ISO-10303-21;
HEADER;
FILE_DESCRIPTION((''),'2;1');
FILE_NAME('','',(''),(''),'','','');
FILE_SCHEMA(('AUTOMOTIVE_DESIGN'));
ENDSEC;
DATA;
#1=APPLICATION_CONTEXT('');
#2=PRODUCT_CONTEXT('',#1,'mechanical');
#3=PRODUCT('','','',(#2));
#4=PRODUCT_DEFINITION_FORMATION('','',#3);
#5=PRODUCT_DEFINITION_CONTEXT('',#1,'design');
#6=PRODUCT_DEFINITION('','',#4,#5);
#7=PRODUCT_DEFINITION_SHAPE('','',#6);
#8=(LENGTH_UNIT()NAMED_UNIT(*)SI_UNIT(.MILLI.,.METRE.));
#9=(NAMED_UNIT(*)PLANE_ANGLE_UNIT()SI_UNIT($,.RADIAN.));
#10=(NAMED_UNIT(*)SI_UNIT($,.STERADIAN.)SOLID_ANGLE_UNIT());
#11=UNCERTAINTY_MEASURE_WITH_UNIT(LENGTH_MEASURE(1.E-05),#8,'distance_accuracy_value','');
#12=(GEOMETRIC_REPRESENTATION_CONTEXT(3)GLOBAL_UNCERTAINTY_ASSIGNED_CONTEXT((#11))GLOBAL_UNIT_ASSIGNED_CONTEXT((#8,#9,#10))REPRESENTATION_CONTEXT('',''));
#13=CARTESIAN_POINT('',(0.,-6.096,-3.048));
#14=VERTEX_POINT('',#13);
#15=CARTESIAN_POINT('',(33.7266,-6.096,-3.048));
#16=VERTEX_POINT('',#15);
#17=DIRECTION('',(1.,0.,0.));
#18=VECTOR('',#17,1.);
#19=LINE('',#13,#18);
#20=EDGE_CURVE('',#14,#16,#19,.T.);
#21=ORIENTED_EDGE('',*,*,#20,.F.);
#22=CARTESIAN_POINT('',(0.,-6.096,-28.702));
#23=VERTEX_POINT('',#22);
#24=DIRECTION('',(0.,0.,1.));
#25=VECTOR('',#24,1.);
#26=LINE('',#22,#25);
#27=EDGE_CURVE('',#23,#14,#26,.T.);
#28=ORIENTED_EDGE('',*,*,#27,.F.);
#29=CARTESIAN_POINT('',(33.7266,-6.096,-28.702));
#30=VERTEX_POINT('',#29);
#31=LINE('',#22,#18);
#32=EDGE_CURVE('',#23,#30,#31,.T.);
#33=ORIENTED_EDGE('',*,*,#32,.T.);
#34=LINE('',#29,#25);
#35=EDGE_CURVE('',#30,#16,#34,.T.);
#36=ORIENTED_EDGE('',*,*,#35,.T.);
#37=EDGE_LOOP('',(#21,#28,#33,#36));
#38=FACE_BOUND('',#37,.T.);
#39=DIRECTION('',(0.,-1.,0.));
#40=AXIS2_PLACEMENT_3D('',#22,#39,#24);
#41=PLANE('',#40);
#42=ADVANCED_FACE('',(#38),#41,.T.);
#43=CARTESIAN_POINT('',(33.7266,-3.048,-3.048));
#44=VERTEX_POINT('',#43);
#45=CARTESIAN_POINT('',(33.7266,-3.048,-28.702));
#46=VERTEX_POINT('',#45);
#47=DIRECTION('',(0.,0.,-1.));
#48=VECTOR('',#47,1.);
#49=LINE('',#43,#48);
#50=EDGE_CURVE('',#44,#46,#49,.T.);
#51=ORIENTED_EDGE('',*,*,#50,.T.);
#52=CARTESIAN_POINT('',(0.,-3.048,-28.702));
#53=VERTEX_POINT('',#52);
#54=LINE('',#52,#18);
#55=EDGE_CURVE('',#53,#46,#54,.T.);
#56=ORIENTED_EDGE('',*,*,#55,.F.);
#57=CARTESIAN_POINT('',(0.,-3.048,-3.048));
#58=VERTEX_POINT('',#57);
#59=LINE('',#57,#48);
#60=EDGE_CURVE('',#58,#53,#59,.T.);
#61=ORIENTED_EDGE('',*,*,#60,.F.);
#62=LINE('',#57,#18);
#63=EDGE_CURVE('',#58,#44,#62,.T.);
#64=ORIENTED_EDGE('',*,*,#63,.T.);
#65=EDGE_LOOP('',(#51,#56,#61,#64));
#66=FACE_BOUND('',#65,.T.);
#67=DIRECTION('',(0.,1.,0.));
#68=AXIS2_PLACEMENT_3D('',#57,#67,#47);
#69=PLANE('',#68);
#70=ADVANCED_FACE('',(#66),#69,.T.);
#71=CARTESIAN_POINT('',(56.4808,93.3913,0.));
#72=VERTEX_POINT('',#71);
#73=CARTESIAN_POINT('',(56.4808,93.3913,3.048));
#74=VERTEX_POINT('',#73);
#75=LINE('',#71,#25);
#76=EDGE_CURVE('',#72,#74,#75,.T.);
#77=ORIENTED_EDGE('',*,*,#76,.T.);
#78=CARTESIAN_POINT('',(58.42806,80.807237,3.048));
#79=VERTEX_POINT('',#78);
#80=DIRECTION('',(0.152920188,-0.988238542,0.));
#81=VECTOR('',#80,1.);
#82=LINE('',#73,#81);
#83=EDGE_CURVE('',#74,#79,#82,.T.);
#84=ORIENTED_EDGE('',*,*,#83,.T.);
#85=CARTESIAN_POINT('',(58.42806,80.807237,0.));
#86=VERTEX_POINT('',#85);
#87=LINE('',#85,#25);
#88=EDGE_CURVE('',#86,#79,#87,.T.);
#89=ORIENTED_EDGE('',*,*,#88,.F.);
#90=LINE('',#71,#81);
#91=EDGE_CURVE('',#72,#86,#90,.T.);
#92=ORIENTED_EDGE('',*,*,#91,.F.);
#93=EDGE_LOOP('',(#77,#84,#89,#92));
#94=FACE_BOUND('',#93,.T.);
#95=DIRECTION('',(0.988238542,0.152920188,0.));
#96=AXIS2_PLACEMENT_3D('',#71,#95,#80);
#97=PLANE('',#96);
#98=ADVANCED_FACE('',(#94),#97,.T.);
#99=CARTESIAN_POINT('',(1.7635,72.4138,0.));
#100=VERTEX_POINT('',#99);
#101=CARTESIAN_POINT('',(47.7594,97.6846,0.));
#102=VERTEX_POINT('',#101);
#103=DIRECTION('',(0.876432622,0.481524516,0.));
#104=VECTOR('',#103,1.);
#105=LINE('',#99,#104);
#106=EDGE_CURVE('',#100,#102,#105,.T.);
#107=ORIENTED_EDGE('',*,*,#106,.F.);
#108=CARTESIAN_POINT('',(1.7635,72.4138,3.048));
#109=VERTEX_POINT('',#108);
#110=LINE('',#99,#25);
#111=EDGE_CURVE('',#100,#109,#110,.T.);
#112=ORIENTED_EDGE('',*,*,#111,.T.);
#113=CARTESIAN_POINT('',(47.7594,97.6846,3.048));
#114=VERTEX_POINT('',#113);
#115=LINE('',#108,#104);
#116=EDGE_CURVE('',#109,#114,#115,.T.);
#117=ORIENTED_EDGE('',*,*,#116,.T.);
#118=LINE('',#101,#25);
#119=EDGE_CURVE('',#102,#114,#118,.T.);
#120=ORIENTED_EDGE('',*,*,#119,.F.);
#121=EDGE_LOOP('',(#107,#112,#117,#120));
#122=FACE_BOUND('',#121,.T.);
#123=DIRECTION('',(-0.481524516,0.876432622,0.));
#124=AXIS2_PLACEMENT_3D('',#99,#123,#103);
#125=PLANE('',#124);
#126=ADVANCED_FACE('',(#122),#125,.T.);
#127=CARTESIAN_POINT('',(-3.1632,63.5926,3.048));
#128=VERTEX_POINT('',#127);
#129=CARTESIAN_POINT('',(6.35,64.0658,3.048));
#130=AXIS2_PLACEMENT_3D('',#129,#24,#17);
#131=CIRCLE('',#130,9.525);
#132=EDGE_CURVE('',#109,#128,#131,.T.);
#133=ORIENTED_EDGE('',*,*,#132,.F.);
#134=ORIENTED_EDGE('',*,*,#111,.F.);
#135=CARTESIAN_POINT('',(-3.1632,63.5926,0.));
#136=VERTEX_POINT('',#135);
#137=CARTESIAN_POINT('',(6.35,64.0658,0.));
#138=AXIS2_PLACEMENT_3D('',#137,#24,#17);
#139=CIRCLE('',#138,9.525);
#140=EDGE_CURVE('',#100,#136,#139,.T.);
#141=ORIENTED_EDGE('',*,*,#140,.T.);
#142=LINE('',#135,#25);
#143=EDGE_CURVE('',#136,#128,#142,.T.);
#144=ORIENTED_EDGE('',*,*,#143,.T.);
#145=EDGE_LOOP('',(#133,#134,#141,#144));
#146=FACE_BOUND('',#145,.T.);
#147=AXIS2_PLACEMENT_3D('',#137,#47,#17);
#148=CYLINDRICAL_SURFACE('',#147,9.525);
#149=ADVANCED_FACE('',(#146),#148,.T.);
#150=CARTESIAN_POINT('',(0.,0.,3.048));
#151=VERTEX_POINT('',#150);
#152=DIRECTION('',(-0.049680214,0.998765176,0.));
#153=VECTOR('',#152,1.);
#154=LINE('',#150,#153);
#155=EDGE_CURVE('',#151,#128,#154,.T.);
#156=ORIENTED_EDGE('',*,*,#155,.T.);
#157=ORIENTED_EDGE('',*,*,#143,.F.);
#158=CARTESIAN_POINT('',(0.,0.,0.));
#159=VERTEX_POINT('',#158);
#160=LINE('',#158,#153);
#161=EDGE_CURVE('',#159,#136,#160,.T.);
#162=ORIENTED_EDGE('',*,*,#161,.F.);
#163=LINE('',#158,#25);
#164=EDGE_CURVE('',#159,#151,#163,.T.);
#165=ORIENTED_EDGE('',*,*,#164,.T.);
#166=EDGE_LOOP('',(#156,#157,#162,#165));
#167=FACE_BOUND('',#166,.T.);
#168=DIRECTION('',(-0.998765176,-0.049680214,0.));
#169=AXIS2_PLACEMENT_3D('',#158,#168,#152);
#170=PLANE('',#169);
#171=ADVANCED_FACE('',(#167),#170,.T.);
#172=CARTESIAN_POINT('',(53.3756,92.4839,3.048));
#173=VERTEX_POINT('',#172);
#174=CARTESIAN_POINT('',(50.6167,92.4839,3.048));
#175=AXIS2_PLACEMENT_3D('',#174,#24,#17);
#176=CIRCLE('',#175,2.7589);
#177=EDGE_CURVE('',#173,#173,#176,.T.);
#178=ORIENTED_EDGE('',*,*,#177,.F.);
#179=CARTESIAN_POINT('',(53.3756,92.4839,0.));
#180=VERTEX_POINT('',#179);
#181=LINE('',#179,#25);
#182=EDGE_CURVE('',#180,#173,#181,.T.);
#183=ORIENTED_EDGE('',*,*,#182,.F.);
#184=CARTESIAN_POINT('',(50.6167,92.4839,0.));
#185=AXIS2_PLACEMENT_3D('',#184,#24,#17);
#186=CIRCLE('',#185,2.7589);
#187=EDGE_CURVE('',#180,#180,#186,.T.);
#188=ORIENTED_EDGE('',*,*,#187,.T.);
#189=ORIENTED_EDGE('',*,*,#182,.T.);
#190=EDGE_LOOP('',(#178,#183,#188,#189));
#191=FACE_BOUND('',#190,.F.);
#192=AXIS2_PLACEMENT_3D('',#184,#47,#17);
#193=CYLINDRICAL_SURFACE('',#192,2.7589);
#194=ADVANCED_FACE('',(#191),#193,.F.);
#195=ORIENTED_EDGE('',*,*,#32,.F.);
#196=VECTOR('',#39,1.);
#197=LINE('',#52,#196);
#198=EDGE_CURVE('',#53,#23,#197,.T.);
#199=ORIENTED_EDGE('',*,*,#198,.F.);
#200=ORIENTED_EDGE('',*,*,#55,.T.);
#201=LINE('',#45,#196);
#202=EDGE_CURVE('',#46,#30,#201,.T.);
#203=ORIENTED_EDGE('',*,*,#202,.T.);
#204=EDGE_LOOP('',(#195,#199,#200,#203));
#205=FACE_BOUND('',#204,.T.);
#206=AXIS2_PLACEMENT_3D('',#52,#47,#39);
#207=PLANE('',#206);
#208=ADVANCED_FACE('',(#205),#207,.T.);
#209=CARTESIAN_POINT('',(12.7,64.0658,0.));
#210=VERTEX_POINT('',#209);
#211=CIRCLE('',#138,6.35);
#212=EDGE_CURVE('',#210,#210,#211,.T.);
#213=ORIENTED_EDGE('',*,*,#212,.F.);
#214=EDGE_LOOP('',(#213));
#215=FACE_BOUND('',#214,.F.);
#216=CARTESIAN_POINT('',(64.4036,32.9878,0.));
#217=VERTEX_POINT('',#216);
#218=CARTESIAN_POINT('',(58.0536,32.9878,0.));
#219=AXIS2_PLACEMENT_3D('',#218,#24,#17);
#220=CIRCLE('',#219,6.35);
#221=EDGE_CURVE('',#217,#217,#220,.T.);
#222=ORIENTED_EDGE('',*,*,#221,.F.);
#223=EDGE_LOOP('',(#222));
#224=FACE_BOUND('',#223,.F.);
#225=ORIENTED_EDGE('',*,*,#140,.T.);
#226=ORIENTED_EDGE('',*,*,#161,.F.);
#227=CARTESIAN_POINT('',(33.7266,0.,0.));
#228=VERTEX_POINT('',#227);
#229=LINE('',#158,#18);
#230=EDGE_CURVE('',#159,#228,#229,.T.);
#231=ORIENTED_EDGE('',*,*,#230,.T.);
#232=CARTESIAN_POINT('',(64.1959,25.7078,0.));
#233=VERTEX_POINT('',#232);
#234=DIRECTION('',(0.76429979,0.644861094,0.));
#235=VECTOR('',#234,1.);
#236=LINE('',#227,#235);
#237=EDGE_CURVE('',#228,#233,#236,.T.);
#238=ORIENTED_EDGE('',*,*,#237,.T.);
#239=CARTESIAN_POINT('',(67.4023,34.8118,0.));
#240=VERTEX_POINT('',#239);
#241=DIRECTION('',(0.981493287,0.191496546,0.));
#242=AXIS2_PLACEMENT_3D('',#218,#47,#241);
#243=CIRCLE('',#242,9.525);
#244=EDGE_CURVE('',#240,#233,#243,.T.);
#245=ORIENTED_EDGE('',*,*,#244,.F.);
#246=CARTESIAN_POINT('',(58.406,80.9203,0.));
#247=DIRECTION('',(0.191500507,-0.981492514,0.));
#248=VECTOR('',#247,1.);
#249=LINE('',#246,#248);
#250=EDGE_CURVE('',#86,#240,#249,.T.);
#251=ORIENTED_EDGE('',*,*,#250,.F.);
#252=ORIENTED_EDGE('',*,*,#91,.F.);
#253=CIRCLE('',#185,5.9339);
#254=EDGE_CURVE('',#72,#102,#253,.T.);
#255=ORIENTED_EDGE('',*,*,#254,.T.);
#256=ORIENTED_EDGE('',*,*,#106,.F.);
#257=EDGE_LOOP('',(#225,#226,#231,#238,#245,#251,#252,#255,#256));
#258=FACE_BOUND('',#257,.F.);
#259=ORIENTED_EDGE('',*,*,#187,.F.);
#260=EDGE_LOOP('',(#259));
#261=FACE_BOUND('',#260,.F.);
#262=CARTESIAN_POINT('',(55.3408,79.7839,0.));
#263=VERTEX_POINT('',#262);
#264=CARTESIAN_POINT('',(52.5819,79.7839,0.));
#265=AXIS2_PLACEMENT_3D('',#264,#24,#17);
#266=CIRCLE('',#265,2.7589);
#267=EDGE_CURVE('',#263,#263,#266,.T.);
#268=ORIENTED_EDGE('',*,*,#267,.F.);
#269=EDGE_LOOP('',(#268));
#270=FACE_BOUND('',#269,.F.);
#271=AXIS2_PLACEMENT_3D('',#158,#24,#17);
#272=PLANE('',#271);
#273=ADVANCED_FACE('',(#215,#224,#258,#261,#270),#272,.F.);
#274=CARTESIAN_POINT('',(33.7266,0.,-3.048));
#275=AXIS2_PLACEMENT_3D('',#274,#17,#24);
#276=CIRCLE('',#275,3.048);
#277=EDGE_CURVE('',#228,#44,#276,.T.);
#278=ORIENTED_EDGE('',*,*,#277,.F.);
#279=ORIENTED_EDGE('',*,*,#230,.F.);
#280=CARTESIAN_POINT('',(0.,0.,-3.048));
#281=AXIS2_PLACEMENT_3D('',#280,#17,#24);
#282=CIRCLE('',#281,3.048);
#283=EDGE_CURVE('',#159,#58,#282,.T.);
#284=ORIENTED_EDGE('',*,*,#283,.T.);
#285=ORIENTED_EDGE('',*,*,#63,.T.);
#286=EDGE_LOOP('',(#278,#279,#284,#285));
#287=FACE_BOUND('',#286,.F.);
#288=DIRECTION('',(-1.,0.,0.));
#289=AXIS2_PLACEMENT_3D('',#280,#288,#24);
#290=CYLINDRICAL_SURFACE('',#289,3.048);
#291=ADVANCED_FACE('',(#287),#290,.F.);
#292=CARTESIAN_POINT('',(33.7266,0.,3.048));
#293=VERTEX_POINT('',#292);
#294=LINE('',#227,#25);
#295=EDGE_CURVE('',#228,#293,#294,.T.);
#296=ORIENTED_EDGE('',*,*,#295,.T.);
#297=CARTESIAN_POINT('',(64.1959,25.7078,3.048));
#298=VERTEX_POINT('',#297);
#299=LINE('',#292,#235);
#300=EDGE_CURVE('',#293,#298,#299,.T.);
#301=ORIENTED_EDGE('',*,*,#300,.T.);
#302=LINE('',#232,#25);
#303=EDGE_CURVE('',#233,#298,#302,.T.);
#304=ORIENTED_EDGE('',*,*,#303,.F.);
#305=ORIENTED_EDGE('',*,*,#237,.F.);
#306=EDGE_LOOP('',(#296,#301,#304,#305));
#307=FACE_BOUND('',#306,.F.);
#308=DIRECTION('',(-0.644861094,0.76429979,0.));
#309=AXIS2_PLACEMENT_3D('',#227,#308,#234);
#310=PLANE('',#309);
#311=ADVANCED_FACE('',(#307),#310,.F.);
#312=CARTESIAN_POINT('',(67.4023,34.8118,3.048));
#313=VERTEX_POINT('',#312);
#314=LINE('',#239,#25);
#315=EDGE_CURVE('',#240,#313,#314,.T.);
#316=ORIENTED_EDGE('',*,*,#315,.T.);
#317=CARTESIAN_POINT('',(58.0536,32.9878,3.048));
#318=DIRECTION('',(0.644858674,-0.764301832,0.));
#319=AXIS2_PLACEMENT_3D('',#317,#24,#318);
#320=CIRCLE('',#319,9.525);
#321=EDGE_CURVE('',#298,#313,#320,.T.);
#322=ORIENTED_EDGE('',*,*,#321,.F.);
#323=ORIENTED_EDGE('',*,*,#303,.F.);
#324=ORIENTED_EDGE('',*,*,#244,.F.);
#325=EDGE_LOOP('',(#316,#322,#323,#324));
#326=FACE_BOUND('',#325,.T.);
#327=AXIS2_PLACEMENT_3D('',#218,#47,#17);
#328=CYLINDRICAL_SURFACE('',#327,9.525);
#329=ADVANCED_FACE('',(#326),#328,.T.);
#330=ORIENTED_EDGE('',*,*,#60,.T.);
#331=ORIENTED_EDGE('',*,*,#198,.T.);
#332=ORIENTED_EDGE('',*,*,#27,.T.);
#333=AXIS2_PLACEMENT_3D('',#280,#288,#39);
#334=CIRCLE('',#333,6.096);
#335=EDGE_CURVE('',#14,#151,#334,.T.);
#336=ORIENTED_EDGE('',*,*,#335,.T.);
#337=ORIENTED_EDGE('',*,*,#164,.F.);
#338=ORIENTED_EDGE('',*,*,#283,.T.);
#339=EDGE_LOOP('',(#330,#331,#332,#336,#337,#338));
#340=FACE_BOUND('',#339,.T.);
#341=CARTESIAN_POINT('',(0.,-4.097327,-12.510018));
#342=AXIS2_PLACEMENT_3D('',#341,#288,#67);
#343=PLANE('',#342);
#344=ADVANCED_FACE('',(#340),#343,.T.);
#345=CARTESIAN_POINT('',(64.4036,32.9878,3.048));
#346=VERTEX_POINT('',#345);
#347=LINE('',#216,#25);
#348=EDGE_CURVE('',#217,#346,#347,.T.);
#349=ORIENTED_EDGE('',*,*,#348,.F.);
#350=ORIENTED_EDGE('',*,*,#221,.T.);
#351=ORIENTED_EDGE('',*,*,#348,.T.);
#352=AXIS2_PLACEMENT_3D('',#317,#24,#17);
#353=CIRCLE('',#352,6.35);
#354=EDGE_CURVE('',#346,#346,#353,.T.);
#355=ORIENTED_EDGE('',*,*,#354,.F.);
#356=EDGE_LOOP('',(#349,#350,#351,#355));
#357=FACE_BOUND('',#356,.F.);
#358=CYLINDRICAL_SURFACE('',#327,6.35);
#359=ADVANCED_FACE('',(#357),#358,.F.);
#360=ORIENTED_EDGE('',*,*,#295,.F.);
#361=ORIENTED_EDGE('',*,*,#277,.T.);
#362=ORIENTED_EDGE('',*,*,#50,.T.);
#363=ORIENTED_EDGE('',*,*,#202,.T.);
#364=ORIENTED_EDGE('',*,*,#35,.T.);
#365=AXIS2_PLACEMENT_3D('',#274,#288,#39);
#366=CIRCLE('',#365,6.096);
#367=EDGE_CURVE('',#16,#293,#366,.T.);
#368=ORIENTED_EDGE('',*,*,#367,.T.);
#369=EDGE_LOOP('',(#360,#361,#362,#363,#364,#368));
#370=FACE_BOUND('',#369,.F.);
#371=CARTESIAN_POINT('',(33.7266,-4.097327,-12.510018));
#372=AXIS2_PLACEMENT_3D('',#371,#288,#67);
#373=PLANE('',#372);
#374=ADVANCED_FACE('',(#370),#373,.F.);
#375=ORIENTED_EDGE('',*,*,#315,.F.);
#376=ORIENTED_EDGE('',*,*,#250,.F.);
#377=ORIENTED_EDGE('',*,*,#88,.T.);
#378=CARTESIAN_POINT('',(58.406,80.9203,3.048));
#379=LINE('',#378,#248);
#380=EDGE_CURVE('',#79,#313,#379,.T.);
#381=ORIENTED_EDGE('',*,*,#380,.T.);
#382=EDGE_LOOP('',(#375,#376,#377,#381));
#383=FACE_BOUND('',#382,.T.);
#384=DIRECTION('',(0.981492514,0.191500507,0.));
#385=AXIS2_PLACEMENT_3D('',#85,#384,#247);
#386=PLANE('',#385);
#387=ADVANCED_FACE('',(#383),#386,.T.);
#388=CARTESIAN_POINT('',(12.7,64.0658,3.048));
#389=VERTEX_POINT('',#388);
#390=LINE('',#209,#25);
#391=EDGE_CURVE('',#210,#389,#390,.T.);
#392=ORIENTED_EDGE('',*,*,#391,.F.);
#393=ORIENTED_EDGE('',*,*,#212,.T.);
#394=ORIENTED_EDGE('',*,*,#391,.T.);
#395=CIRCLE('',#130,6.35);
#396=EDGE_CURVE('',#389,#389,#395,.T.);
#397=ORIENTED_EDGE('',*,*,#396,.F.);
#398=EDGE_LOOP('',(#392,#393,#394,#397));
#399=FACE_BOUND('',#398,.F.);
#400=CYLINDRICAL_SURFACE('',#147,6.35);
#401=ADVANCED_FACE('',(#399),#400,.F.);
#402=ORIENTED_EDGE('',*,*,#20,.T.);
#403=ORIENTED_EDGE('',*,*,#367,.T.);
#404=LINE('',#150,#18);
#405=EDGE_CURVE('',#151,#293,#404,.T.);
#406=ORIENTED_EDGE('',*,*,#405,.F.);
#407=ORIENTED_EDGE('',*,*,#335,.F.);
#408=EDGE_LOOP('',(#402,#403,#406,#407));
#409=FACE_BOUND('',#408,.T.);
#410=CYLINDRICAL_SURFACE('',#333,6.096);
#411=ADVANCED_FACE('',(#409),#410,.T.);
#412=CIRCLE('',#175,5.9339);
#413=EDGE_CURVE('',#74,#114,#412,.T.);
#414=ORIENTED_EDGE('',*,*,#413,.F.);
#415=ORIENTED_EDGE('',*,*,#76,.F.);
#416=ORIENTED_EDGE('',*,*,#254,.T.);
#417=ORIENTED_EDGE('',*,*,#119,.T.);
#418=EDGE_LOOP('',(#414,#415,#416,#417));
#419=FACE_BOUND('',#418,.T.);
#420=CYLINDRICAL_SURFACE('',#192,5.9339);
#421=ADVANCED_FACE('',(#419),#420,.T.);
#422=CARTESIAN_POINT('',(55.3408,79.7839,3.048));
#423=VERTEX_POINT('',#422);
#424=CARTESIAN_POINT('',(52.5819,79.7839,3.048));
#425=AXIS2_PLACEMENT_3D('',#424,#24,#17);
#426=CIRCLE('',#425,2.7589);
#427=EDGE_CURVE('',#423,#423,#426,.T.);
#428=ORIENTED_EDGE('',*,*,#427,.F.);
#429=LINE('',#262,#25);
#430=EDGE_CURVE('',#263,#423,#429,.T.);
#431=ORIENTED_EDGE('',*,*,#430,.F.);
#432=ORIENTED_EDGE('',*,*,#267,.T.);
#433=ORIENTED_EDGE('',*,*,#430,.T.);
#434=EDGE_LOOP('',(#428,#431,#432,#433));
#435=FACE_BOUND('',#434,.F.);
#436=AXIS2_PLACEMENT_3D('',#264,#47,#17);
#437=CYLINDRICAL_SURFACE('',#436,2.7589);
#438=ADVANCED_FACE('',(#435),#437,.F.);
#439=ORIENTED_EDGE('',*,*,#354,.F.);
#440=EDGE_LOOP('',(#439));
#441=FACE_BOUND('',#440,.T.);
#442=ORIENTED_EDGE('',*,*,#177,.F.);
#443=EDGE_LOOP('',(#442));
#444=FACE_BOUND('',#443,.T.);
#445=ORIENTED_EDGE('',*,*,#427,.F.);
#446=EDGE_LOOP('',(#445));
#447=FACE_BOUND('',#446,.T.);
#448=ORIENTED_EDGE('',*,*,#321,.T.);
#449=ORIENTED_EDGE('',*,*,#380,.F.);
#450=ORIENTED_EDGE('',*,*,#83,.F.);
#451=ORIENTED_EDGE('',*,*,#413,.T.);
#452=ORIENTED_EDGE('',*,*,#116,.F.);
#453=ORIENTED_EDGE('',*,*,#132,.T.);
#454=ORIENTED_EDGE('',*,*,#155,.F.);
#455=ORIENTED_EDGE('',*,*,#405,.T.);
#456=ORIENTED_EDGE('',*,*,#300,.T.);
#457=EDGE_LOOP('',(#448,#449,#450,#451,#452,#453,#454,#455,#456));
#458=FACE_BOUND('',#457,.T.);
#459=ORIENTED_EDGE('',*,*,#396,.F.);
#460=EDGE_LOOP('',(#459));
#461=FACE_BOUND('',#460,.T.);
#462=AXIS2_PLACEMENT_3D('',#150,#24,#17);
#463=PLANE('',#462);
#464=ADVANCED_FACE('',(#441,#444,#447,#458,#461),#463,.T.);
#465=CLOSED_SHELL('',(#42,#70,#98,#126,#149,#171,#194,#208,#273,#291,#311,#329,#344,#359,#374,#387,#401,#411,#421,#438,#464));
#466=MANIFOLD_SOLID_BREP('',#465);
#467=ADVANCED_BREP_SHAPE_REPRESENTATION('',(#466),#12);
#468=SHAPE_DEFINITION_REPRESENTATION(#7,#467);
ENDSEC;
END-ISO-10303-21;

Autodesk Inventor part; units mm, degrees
ref_plane "YZ Plane" through (0, 0, 0) normal (1, 0, 0) x (0, 1, 0)
ref_plane "XZ Plane" through (0, 0, 0) normal (0, 1, 0) x (-1, 0, 0)
ref_plane "XY Plane" through (0, 0, 0) normal (0, 0, 1) x (1, 0, 0)
sketch "Sketch1" plane through (0, 0, 0) normal (0, 0, 1) x (1, 0, 0)
  circle A0 centre (6.35, 64.0658) radius 6.35
  circle A1 centre (58.0536, 32.9878) radius 6.35
  line L0 (0, 0) -> (33.7266, 0)
  circle A2 centre (50.6167, 92.4839) radius 2.7589
  circle A3 centre (52.5819, 79.7839) radius 2.7589
  line L1 (0, 0) -> (0, 86.6758) construction
  dimension "d12" = 12.7
  dimension "d13" = 12.7
  dimension "d15" = 51.7036
  dimension "d16" = 31.078
  dimension "d18" = 32.9877
  dimension "d19" = 24.327
  dimension "d20" = 5.5178
  dimension "d21" = 5.5178
  dimension "d22" = 46.7962
  dimension "d23" = 5.4717
  dimension "d24" = 1.9652
  dimension "d25" = 12.7
sketch "Sketch3" plane through (0, 0, 0) normal (0, 0, 1) x (1, 0, 0)
  circle A0 centre (6.35, 64.0658) radius 6.35
  circle A1 centre (50.6167, 92.4839) radius 2.7589
  circle A2 centre (52.5819, 79.7839) radius 2.7589
  circle A3 centre (58.0536, 32.9878) radius 6.35
  circle A4 centre (6.35, 64.0658) radius 9.525
  circle A5 centre (58.0536, 32.9878) radius 9.525
  circle A6 centre (52.5819, 79.7839) radius 5.9339
  circle A7 centre (50.6167, 92.4839) radius 5.9339
  line L0 (0, 0) -> (-3.1632, 63.5926)
  line L1 (33.7266, 0) -> (64.1959, 25.7078)
  line L2 (1.7635, 72.4138) -> (47.7594, 97.6846)
  line L3 (56.4808, 93.3913) -> (58.446, 80.6913)
  line L4 (58.406, 80.9203) -> (67.4023, 34.8118)
  line L5 (6.35, 64.0658) -> (58.0536, 32.9878) construction
  line L6 (58.0536, 32.9878) -> (52.5819, 79.7839) construction
  line L7 (52.5819, 79.7839) -> (50.6167, 92.4839) construction
  line L8 (50.6167, 92.4839) -> (6.35, 64.0658) construction
  line L9 (52.5819, 79.7839) -> (6.35, 64.0658) construction
  line L10 (0, 0) -> (33.7266, 0)
  line L11 (0, 0) -> (33.7266, 0)
  line L12 (33.7266, 0) -> (33.7266, -31.75)
  line L13 (33.7266, -31.75) -> (0, -31.75)
  line L14 (0, -31.75) -> (0, 0)
  point P0 (58.4282, 80.8062)
  dimension "d27" = 3.175
  dimension "d28" = 3.175
  dimension "d29" = 3.175
  dimension "d30" = 3.175
  dimension "d33" = 31.75
extrude "Plate3" add sketch "Sketch3" along normal blind 3.048 contours A4 | A6 | A4 L2 A7 L3 L4 A5 L1 L10 L0 | A7 | A5
sketch "Sketch4" plane through (0, -3.048, -3.048) normal (0, -1, 0) x (1, 0, 0)
  line L0 (33.7266, 0) -> (0, 0)
  line L1 (0, 0) -> (0, -25.654)
  line L2 (0, -25.654) -> (33.7266, -25.654)
  line L3 (33.7266, -25.654) -> (33.7266, 0)
edge flange "Flange1" height 31.75 angle 90 thickness 3.048 bend radius 3.048 thickness toward (0, -1, 0) relief tear relief width 3.048 relief depth 1.524 edges at (16.8633, 0, 0) wall of the first edge with corners at (33.7266, -3.048, -3.048) (0, -3.048, -3.048) (0, -3.048, -28.702) (33.7266, -3.048, -28.702)
bend "Bend3"
corner "Corner1"
equation "\"d21\" = d20"
equation "\"d28\" = d27"
equation "\"d29\" = d27"
equation "\"d30\" = d27"
equation "\"d31\" = Thickness"
equation "\"d34\" = BendReliefWidth"
equation "\"d35\" = BendReliefDepth"
equation "\"d36\" = MinimumRemnant"
equation "\"d37\" = TransitionRadius"
equation "\"d40\" = BendRadius"
equation "\"d41\" = CornerReliefSize"
equation "\"d42\" = GapSize"
equation "\"d43\" = JacobiRadiusSize"
equation "\"BendRadius\" = Thickness"
equation "\"BendReliefWidth\" = Thickness"
equation "\"BendReliefDepth\" = 0.5 * Thickness"
equation "\"CornerReliefSize\" = 4 * Thickness"
equation "\"MinimumRemnant\" = 2 * Thickness"
equation "\"TransitionRadius\" = BendRadius"
equation "\"JacobiRadiusSize\" = BendRadius"
equation "\"GapSize\" = Thickness"
equation "\"Thickness\" = 3.048"
properties part number "GearsMount"
